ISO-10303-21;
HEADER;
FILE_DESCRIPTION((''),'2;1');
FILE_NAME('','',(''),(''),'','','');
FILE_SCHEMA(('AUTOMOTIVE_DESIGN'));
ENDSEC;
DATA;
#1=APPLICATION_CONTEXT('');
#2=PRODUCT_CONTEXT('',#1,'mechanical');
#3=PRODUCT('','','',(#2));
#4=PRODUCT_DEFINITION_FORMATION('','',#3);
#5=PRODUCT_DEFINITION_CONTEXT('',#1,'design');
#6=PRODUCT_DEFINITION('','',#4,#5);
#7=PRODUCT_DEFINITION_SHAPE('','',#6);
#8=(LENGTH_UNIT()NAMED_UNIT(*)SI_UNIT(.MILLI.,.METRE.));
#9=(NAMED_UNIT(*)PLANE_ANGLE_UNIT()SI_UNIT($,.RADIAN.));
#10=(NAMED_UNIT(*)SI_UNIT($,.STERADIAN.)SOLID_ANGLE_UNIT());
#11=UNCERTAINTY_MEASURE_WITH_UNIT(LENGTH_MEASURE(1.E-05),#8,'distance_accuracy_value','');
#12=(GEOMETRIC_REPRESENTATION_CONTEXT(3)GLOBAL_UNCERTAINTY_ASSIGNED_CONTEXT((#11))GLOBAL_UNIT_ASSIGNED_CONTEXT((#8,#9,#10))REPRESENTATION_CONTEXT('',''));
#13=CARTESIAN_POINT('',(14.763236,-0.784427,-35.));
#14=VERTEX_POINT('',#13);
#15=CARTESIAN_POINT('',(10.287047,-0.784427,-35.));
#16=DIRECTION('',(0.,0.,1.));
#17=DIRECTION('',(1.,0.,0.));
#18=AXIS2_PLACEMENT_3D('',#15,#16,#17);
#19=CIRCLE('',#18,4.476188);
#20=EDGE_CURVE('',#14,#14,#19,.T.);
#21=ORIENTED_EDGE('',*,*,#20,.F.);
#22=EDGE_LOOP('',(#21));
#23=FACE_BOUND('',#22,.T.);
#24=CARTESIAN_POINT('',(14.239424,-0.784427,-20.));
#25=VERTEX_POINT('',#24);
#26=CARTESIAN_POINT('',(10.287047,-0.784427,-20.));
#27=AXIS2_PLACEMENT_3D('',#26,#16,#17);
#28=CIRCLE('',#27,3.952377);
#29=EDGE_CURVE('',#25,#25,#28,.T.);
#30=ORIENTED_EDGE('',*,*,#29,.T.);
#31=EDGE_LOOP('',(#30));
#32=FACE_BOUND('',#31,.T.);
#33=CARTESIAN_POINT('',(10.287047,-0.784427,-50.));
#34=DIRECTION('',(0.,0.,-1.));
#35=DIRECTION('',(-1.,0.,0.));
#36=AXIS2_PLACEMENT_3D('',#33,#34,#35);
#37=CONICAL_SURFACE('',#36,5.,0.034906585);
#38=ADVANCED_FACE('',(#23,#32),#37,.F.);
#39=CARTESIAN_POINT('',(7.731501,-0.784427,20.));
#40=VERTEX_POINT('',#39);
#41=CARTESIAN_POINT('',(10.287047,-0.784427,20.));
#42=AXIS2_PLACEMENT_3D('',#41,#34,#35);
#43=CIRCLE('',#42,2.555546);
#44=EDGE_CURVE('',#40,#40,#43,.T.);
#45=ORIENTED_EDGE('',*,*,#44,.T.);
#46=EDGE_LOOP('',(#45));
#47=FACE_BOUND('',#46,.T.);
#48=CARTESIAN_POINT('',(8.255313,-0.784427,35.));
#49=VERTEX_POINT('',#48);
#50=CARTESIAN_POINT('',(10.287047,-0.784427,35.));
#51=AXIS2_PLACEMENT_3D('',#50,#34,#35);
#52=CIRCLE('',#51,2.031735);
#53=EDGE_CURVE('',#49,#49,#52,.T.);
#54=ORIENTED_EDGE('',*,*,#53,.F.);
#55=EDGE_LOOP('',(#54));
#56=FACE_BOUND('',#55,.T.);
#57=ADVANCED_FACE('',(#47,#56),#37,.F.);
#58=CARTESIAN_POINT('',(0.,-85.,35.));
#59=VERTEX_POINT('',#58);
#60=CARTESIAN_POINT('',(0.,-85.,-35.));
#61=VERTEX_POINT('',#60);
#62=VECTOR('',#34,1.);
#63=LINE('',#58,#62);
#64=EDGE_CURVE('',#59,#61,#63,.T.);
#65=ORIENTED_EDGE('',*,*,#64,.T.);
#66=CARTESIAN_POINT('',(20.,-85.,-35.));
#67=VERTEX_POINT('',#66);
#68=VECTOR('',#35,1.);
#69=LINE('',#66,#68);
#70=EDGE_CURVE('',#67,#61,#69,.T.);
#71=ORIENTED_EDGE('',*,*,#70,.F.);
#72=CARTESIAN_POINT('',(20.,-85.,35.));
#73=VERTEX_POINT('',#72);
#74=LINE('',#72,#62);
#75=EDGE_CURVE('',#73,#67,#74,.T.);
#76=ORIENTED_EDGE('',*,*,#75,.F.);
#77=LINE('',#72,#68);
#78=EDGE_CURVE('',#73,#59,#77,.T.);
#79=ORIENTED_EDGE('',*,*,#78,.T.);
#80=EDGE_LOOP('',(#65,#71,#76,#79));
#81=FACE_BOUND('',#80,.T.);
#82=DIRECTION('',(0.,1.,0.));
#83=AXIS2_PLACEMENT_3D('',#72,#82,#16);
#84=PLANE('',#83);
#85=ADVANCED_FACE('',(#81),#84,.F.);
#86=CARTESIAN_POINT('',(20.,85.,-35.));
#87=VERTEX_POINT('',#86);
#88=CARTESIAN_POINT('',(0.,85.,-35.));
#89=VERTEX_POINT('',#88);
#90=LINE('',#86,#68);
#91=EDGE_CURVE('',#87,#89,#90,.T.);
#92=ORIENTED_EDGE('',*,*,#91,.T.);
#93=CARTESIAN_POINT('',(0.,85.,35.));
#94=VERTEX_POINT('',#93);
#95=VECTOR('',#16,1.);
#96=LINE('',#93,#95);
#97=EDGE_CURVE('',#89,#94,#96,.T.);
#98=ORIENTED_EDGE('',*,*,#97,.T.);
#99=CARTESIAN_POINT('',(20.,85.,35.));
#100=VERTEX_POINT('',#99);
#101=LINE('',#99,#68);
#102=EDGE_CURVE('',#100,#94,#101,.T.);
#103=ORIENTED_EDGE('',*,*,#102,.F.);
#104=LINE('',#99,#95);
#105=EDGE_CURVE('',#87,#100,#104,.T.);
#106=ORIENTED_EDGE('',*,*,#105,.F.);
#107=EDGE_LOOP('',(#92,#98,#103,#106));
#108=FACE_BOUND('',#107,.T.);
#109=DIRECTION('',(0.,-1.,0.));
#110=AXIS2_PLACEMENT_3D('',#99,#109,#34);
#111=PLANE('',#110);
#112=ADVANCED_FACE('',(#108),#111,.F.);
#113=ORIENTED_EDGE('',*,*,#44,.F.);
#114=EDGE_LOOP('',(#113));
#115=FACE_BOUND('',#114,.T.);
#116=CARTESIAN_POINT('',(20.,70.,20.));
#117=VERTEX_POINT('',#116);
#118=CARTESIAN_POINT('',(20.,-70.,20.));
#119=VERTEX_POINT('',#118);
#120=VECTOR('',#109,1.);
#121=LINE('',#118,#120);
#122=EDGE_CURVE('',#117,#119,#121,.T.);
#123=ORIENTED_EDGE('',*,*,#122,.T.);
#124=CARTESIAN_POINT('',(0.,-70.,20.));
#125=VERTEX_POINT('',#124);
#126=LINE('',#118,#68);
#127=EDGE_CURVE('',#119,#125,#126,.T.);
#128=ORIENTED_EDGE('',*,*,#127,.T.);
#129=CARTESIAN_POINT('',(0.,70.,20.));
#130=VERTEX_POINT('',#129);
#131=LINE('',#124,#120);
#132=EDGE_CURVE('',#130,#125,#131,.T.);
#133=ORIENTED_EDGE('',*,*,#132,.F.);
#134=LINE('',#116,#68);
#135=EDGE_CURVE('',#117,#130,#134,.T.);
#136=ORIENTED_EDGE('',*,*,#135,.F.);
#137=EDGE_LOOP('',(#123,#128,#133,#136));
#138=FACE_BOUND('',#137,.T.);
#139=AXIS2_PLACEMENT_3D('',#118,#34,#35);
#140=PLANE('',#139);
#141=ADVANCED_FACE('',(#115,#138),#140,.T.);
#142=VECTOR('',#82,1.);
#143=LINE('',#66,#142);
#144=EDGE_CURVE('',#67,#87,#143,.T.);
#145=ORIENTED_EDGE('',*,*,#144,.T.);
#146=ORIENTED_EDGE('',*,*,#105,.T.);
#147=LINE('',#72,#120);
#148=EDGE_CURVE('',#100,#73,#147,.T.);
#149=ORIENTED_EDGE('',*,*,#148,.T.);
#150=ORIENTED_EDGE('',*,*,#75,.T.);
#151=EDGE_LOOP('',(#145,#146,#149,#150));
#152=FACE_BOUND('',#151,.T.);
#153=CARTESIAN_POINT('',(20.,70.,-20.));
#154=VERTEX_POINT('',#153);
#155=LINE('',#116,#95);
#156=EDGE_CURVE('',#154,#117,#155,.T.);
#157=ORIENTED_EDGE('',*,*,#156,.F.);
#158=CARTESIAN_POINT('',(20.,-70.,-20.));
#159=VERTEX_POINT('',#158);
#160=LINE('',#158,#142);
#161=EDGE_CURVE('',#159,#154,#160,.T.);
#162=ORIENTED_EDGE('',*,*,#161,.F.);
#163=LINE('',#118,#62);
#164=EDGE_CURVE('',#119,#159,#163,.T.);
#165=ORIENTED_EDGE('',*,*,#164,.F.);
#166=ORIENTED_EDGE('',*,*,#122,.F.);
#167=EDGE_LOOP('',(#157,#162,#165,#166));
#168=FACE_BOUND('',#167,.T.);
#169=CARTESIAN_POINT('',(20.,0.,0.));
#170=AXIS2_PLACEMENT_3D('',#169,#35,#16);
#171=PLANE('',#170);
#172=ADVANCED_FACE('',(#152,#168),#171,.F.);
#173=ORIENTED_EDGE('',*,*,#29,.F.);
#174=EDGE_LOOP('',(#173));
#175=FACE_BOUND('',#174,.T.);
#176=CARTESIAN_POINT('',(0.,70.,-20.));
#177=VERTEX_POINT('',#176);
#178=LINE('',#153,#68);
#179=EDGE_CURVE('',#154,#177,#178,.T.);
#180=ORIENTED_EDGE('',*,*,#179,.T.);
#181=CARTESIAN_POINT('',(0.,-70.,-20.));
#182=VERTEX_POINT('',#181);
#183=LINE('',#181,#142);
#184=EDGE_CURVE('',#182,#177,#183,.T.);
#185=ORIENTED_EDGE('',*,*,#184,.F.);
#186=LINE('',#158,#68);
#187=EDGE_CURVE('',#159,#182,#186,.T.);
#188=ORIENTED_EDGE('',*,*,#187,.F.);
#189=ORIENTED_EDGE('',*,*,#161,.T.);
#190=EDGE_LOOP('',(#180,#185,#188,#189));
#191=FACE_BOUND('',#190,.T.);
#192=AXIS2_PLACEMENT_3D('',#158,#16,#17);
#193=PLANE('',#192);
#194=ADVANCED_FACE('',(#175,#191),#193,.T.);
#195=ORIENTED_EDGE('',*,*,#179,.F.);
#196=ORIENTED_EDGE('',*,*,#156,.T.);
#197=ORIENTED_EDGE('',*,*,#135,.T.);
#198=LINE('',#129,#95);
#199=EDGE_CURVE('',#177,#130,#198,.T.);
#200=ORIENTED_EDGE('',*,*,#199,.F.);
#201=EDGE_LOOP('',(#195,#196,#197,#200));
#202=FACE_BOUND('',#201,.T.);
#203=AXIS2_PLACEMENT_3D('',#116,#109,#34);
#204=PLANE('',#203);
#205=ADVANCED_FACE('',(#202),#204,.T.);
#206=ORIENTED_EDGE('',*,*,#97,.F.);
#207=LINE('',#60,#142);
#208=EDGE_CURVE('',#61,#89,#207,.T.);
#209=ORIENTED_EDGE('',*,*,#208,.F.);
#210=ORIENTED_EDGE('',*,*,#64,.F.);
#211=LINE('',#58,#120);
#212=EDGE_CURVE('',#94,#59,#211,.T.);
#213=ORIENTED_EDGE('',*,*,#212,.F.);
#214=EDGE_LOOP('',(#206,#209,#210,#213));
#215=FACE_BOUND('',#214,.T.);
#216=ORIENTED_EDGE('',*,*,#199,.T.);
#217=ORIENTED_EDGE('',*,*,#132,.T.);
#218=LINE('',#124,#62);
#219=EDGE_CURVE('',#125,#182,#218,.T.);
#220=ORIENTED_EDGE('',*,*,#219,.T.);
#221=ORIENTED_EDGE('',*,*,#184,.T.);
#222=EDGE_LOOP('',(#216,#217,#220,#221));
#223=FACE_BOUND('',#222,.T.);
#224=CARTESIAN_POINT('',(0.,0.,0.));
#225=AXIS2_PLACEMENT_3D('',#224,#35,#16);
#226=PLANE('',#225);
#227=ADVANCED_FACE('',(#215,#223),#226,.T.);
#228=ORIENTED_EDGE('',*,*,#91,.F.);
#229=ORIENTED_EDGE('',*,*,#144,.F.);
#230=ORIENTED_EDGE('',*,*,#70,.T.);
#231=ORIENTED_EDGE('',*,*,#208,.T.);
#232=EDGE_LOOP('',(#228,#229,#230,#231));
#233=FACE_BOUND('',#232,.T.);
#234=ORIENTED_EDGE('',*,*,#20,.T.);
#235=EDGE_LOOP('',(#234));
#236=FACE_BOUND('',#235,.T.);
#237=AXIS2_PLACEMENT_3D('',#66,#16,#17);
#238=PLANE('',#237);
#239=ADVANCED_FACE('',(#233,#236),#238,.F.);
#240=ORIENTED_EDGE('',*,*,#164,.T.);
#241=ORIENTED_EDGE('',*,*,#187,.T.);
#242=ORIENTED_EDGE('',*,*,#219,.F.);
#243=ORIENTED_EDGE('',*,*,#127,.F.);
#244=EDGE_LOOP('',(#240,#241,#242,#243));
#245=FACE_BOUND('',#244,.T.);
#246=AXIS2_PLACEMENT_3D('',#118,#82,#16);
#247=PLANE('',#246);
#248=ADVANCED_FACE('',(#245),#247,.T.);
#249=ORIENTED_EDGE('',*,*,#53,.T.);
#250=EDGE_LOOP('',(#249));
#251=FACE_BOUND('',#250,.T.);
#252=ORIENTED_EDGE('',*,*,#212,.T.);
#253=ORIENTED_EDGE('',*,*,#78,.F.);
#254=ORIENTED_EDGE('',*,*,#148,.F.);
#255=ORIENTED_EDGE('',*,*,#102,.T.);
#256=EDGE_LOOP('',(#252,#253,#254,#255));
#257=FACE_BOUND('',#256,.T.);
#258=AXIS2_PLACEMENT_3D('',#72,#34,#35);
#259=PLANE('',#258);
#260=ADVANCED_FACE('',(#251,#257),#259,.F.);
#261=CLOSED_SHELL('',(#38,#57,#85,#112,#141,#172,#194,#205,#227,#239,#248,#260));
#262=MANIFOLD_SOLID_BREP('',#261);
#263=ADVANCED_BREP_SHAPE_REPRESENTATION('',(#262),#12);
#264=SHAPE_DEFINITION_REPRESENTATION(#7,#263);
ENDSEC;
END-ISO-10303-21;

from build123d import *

# Parameters (mm, degrees)
SKETCH1_W           = 70
SKETCH1_H           = 170
SKETCH1_W_2         = 40
SKETCH1_H_2         = 140
BOSS_EXTRUDE1_DEPTH = 20


# Read off the part's stored shape, not the designer's step: Hole1
with BuildPart() as part:
    # Sketch1 → Boss-Extrude1 (new body)
    with BuildSketch(Plane(origin=(0, 0, 0), x_dir=(0, 0, -1), z_dir=(1, 0, 0))):
        Rectangle(SKETCH1_W, SKETCH1_H)
        Rectangle(SKETCH1_W_2, SKETCH1_H_2, mode=Mode.SUBTRACT)
    extrude(amount=BOSS_EXTRUDE1_DEPTH)

    # Hole1 outline → Hole1 (revolve, cut)
    with BuildSketch(Plane(origin=(10.287047222, -0.784426919, 0), x_dir=(1, 0, 0), z_dir=(0, -1, 0))):
        Polygon((0, 20), (2.555546136, 20), (2.031734593, 35), (0, 35), align=None)
        Polygon((3.952376915, -20), (0, -20), (0, -35), (4.476188458, -35), align=None)
    revolve(axis=Axis((10.287047222, -0.784426919, 0), (0, 0, 1)), mode=Mode.SUBTRACT)


solid = part.part
